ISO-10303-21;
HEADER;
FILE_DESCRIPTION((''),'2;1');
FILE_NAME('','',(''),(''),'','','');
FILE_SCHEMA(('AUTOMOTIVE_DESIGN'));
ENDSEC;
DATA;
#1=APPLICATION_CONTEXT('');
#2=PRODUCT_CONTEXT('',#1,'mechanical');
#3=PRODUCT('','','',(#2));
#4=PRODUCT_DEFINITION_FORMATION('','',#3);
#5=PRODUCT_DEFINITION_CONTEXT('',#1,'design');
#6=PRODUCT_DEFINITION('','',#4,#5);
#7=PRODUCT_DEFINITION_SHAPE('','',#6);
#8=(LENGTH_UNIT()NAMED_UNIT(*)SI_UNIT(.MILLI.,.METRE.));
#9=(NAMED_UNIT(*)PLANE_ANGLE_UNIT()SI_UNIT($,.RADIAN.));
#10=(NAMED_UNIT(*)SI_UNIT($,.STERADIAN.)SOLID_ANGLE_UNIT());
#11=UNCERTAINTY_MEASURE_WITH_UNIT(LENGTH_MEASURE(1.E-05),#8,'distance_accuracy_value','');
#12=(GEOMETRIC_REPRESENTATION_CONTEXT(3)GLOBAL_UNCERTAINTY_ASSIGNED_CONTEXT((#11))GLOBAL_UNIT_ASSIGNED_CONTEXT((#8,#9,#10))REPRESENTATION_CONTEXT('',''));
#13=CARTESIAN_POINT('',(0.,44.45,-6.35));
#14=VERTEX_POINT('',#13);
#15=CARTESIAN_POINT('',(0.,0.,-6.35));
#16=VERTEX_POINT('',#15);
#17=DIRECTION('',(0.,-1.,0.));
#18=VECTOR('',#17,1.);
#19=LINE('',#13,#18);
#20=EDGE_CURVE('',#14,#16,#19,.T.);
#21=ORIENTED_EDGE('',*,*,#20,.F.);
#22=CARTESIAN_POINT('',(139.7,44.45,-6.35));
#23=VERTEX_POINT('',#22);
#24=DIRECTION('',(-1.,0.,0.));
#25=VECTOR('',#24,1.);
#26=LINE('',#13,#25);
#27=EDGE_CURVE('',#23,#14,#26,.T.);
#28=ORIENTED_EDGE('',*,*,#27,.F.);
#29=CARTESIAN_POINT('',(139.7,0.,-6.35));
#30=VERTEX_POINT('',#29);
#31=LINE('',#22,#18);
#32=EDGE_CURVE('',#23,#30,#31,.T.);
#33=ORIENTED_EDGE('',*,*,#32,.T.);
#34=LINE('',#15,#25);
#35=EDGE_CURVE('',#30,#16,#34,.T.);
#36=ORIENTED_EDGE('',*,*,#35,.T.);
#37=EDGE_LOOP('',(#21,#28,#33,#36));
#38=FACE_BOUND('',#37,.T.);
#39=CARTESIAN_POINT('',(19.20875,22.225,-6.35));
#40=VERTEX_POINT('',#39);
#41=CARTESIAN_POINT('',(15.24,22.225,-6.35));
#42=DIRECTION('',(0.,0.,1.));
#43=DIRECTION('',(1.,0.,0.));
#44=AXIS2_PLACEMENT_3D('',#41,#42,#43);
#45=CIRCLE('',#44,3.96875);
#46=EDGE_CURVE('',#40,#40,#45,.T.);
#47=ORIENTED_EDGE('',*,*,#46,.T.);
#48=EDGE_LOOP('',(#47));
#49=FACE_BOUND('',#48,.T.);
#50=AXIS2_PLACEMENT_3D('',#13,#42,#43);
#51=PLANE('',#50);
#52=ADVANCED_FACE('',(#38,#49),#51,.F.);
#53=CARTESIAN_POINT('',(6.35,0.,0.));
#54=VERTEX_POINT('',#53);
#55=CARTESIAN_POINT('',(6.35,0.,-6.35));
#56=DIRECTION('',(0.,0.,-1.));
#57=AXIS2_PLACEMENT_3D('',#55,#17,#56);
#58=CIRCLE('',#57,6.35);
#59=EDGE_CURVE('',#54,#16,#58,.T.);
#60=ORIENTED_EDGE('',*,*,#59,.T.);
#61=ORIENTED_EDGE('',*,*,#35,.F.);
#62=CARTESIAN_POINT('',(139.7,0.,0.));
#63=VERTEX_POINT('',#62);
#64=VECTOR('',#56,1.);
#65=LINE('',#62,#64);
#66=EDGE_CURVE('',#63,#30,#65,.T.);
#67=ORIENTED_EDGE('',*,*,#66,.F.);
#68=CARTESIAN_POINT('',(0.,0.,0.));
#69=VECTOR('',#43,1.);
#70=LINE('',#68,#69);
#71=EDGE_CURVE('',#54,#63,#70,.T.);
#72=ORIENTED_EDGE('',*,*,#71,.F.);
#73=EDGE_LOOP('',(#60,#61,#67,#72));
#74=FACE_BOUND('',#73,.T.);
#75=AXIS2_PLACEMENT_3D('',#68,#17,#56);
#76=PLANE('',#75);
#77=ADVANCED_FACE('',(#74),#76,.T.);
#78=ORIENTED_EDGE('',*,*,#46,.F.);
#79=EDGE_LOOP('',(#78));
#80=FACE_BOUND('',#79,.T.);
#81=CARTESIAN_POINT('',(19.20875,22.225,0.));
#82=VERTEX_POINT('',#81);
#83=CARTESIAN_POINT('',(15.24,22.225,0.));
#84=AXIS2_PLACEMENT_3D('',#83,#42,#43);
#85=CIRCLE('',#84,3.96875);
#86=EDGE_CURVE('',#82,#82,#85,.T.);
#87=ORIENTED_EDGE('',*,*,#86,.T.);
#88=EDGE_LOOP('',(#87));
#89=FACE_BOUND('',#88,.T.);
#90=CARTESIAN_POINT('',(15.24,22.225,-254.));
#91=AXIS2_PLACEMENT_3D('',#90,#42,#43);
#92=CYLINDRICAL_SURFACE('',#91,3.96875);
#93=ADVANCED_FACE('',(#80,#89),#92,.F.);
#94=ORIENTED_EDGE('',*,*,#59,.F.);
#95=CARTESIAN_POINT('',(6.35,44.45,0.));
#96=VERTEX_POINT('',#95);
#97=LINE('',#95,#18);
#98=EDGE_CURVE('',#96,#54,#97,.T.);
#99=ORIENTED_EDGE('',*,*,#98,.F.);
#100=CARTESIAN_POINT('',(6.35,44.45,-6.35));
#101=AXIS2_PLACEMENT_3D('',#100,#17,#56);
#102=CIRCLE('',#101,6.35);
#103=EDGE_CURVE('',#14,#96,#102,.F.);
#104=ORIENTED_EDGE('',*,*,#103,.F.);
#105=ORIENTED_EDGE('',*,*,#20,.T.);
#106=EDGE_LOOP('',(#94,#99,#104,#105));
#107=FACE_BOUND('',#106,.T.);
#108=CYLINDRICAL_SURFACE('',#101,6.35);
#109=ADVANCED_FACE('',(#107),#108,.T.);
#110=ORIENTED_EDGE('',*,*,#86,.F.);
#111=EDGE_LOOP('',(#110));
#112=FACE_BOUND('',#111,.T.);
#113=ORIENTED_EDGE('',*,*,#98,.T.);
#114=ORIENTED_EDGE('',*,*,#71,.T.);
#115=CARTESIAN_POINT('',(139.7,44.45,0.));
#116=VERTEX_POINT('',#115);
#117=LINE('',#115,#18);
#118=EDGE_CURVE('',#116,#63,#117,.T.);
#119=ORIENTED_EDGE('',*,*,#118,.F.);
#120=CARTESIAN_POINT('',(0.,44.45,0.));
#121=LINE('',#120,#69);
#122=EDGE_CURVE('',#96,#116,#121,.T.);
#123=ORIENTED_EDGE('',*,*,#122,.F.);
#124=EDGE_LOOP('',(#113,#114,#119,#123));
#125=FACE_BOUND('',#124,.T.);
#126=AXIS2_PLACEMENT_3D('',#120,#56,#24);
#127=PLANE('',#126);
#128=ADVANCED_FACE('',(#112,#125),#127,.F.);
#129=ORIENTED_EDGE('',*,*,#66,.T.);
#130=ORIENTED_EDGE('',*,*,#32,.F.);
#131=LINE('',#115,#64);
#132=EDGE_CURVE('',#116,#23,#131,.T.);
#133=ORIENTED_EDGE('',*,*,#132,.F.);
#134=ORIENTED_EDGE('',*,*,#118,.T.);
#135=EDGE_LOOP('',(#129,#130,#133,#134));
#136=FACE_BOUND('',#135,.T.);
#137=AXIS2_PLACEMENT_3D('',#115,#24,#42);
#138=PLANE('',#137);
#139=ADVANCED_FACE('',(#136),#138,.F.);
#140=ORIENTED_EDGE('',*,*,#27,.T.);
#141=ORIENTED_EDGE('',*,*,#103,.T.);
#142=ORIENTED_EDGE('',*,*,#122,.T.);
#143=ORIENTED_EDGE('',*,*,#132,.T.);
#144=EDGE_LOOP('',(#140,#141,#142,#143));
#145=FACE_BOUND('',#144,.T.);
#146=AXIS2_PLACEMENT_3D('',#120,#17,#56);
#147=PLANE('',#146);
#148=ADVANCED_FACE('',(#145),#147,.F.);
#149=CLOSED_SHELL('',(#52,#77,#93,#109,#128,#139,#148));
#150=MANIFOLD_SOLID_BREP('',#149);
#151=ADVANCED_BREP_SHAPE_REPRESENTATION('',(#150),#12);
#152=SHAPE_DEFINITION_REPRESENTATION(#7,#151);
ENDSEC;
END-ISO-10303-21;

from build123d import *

# Parameters (mm, degrees)
SKETCH1_W           = 139.7
SKETCH1_H           = 6.35
BOSS_EXTRUDE1_DEPTH = 44.45
FILLET1_R           = 6.35
SKETCH4_R           = 3.96875
CUT_EXTRUDE2_DEPTH  = 254


with BuildPart() as part:
    # Sketch1 → Boss-Extrude1 (new body)
    with BuildSketch(Plane(origin=(0, 0, 0), x_dir=(1, 0, 0), z_dir=(0, 1, 0))):
        with Locations((69.85, 3.175)):
            Rectangle(SKETCH1_W, SKETCH1_H)
    extrude(amount=BOSS_EXTRUDE1_DEPTH)

    # Fillet1
    fillet1_edges = [part.edges().sort_by_distance(p)[0] for p in [
        (0, 22.225, 0),
    ]]
    fillet(fillet1_edges, radius=FILLET1_R - 0.0001)  # a hair under: the kernel refuses the full size

    # Sketch4 → Cut-Extrude2 (cut)
    with BuildSketch(Plane(origin=(69.948790088, 1.415162488, 0), x_dir=(1, 0, 0), z_dir=(0, 0, 1))):
        with Locations((-54.708790088, 20.809837512)):
            Circle(SKETCH4_R)
    extrude(amount=-CUT_EXTRUDE2_DEPTH, mode=Mode.SUBTRACT)


solid = part.part
